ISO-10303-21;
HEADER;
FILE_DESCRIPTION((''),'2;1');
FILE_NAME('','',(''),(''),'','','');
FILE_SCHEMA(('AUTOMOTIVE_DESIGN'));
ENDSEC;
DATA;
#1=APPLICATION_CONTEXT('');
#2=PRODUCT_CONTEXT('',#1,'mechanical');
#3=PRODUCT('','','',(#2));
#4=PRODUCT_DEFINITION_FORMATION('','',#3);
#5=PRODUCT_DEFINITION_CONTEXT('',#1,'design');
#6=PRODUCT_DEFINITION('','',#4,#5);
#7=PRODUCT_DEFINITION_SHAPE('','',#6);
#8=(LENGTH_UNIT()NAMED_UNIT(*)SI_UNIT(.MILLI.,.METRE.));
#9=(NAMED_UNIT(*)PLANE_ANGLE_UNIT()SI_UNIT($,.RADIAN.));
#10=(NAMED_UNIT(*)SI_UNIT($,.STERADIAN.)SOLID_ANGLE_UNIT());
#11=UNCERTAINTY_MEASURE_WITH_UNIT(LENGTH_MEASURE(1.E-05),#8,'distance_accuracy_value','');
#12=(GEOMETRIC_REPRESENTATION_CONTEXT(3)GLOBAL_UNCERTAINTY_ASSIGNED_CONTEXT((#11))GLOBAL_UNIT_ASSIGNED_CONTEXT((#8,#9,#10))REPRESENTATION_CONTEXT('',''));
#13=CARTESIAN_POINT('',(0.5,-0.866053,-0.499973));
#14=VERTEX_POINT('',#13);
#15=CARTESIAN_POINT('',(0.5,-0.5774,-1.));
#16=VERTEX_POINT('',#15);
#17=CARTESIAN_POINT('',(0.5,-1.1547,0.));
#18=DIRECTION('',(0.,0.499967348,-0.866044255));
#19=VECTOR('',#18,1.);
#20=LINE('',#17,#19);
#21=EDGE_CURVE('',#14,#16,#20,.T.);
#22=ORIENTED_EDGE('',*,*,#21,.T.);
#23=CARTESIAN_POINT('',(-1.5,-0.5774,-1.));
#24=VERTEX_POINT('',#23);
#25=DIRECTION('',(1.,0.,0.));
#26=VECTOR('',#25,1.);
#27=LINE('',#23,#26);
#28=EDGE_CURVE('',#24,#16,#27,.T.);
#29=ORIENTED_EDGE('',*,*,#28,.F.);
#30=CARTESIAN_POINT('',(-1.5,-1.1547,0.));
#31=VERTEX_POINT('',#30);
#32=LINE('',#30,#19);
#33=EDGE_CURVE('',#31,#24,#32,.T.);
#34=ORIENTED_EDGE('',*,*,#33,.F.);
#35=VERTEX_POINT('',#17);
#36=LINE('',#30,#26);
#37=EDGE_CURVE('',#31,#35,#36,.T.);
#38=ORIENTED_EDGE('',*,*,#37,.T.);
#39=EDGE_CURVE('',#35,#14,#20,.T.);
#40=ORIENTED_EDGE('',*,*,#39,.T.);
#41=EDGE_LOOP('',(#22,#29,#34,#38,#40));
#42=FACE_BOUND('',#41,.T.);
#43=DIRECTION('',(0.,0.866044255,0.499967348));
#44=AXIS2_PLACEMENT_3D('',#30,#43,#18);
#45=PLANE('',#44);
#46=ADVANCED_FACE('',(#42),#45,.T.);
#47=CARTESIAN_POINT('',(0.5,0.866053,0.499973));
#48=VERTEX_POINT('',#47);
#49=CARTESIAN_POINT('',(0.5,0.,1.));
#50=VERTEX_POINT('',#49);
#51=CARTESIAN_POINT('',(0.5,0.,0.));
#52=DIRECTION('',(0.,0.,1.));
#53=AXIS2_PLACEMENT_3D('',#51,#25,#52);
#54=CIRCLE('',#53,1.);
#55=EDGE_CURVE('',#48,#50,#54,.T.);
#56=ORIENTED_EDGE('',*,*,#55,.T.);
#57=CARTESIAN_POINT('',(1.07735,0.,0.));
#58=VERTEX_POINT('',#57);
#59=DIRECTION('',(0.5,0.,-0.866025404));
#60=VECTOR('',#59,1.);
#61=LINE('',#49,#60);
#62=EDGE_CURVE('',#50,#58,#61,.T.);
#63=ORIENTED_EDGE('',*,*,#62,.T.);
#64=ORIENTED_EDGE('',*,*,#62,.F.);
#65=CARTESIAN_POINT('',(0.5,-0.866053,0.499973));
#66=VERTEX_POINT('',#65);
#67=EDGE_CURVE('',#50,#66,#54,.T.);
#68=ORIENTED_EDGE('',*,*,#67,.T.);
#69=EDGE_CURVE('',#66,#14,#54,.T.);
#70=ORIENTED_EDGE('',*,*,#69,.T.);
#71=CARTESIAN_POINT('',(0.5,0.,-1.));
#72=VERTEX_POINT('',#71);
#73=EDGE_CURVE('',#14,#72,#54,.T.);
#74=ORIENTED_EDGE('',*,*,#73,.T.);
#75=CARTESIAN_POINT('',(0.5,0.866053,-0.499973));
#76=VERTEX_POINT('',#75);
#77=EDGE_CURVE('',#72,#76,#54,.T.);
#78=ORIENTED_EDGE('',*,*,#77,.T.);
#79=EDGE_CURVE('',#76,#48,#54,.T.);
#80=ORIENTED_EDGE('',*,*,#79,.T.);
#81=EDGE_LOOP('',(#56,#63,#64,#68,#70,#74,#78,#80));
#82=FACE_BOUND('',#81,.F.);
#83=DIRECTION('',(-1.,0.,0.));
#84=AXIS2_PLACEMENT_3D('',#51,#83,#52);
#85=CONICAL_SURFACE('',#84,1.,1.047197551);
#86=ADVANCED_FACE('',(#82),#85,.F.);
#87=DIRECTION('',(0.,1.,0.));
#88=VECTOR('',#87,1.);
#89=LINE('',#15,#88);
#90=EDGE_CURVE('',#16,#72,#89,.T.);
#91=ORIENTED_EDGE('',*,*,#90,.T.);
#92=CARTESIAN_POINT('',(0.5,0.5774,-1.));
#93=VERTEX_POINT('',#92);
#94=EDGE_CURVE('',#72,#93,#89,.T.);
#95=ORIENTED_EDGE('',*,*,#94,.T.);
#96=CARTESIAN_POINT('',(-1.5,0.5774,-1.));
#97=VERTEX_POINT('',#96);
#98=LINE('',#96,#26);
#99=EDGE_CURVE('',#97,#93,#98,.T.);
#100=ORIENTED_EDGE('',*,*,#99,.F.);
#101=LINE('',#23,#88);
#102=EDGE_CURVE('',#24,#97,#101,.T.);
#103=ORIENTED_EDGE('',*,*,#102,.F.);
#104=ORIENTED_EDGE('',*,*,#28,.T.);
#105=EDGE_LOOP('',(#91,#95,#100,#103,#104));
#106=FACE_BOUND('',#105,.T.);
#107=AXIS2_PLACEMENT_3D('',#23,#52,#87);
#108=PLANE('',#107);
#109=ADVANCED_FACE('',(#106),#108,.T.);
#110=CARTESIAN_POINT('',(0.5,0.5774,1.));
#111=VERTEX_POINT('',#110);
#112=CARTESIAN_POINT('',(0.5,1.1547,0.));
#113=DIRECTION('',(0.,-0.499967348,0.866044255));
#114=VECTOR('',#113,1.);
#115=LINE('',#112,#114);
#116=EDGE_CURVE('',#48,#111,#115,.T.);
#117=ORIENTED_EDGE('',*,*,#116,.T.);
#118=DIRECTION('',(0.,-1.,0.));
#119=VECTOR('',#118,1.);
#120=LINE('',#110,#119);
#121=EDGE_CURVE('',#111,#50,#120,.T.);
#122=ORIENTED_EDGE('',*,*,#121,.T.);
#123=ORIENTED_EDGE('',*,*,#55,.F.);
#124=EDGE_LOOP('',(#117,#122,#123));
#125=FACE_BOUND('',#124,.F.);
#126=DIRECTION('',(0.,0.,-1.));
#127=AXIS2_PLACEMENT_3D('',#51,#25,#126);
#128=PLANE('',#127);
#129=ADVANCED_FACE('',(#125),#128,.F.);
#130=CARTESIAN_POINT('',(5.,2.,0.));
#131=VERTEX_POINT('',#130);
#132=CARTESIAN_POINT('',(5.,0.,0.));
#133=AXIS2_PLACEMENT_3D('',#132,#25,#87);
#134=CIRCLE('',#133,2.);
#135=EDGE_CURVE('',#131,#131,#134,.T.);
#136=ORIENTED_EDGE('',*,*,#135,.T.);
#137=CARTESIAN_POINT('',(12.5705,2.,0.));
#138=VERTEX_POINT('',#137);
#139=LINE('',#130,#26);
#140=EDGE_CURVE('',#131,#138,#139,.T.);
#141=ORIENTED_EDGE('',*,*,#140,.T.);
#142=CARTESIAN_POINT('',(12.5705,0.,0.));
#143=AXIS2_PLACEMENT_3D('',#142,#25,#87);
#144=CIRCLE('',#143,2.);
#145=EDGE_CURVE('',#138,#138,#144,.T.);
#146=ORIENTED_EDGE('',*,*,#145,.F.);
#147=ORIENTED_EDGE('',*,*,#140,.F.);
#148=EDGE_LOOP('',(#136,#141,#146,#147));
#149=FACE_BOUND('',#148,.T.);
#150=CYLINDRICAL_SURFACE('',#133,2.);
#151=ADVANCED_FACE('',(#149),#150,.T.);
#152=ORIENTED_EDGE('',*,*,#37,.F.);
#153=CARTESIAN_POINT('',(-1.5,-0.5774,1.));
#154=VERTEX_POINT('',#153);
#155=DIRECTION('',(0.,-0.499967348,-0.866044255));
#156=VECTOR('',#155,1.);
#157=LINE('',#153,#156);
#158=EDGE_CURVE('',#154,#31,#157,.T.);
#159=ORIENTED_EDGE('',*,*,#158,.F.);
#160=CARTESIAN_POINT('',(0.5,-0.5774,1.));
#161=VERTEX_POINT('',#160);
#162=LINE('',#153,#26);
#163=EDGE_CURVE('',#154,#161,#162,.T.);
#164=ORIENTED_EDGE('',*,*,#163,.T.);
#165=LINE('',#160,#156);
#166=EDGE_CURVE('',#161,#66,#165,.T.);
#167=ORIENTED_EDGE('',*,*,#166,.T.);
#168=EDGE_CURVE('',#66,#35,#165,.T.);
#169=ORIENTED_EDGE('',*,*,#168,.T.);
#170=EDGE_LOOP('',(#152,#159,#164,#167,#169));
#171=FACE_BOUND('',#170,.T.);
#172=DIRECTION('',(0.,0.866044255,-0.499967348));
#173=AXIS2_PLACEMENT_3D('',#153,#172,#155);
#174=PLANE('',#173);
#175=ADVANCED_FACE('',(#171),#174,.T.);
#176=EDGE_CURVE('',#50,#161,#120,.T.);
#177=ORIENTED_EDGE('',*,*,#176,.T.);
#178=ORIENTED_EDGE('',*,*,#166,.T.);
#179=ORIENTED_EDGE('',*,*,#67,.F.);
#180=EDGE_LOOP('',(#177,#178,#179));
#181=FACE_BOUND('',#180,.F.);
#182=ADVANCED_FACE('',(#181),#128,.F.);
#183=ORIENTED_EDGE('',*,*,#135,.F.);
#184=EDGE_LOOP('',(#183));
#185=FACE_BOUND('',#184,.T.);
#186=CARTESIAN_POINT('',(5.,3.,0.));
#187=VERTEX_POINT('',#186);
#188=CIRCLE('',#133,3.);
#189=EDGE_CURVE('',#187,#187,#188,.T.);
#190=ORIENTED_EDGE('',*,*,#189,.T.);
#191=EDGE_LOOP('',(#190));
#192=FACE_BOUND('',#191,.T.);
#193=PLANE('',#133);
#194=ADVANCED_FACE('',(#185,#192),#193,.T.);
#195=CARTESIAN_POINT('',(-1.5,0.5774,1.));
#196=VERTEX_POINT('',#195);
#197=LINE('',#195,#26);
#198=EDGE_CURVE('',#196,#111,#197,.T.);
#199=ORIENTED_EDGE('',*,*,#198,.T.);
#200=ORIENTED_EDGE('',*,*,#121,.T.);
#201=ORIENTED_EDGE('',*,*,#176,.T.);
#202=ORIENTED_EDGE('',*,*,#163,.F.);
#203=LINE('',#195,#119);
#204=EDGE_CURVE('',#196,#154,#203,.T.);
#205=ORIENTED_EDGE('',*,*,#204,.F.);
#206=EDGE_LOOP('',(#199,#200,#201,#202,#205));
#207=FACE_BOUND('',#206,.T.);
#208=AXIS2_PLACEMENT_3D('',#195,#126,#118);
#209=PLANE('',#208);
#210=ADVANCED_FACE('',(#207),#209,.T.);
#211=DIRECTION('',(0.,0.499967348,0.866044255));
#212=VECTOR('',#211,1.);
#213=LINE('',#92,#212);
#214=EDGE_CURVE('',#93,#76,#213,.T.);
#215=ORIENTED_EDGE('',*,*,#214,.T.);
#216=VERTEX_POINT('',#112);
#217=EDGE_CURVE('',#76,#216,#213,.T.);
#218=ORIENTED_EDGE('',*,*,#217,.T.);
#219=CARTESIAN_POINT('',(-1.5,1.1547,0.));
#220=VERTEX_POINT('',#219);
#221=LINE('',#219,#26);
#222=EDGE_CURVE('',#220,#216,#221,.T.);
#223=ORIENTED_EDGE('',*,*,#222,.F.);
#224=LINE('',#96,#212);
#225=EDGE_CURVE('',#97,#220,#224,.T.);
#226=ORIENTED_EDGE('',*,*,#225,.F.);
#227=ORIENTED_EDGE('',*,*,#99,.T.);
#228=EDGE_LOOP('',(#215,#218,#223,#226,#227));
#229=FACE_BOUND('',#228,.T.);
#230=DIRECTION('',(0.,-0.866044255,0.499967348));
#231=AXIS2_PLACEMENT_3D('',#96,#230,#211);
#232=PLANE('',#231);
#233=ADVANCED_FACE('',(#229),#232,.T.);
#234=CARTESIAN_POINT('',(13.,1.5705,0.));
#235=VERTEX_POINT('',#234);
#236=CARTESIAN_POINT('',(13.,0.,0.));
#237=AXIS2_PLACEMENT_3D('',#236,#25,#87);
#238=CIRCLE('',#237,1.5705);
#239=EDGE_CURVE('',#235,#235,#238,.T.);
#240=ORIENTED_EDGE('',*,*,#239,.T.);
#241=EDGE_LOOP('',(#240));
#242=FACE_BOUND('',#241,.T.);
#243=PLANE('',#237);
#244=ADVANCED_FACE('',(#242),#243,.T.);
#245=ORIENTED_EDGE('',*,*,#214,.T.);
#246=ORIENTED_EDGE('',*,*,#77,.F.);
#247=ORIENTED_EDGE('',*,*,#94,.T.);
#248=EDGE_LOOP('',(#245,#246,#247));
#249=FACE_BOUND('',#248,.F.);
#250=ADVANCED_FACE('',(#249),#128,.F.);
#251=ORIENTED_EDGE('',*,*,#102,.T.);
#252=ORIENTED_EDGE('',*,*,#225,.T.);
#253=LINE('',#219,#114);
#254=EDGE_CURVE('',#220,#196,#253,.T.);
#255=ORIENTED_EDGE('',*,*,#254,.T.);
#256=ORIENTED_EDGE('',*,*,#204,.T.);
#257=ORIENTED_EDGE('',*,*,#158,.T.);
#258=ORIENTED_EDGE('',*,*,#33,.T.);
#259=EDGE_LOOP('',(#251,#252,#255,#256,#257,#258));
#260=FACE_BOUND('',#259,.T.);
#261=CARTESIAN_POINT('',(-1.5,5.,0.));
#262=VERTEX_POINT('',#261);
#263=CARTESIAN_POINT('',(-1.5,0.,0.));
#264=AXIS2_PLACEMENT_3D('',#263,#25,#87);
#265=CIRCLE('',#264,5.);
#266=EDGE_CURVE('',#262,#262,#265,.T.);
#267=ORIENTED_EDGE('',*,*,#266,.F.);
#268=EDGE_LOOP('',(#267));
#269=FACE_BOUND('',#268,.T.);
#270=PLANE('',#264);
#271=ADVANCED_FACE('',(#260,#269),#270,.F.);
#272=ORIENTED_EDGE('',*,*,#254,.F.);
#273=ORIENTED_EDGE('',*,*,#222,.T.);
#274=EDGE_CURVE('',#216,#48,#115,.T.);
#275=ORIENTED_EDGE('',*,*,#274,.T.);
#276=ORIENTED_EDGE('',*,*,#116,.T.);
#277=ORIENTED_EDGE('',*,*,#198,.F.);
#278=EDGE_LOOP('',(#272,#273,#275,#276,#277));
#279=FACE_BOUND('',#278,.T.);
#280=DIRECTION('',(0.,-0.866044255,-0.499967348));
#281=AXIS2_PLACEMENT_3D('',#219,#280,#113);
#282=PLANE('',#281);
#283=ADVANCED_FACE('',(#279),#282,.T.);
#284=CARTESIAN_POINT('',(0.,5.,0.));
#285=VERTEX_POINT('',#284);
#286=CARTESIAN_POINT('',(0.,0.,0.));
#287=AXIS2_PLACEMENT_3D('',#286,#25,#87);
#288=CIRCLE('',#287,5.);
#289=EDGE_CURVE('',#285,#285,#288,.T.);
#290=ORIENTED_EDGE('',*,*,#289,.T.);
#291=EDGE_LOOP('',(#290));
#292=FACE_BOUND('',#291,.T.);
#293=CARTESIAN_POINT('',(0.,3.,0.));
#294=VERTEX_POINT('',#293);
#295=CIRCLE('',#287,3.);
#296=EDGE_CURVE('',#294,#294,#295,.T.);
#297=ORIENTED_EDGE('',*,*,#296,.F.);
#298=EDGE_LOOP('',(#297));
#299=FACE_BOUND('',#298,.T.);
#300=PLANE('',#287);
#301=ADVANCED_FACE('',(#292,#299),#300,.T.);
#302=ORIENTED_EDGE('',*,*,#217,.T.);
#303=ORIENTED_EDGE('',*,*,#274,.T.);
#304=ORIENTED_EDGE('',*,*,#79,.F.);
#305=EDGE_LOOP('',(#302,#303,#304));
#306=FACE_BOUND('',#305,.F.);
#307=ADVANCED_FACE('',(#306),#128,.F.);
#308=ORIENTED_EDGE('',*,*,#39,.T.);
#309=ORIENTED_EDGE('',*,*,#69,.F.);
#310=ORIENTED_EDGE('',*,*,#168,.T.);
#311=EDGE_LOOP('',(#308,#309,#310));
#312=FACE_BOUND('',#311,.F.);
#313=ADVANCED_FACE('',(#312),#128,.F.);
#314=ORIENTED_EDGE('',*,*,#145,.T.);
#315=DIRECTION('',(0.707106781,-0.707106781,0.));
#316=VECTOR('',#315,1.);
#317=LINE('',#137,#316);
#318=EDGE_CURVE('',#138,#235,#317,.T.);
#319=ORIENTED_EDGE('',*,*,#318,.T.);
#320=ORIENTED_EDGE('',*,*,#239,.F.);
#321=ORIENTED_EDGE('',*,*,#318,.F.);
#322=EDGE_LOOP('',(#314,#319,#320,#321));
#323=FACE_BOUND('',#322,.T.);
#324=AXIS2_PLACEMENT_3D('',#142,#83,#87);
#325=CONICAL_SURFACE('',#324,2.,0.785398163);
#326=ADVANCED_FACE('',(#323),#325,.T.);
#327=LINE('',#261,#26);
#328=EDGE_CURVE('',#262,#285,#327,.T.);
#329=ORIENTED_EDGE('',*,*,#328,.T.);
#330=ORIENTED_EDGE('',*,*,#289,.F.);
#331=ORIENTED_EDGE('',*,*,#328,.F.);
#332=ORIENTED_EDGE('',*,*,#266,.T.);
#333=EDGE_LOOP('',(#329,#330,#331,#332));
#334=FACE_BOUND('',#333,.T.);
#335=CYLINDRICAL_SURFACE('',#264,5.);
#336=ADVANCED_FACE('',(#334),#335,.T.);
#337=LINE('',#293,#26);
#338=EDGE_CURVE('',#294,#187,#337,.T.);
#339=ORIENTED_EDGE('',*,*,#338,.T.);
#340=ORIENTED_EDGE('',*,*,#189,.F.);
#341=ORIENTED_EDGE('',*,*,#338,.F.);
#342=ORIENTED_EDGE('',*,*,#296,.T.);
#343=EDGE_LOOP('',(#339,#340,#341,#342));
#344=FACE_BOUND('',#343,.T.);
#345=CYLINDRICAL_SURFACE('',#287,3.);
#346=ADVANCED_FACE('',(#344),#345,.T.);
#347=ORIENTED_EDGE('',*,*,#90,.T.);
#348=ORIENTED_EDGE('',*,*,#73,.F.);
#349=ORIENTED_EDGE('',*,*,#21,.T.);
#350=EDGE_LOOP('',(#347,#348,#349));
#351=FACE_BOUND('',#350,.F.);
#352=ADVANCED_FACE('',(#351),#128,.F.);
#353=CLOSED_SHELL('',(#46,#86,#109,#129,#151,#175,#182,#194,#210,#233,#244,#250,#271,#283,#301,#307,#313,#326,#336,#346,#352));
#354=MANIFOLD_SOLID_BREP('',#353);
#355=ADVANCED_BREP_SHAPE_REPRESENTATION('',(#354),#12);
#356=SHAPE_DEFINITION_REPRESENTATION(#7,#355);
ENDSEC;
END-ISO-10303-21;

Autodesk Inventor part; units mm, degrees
ref_plane "YZ Plane" through (0, 0, 0) normal (1, 0, 0) x (0, 1, 0)
ref_plane "XZ Plane" through (0, 0, 0) normal (0, 1, 0) x (-1, 0, 0)
ref_plane "XY Plane" through (0, 0, 0) normal (0, 0, 1) x (1, 0, 0)
sketch "Sketch_1" plane through (0, 0, 0) normal (0, 0, 1) x (1, 0, 0)
  line L0 (5, 0) -> (-1.5, 0)
  line L1 (-1.5, 0) -> (-1.5, 5)
  line L2 (-1.5, 5) -> (0, 5)
  line L3 (0, 5) -> (0, 3)
  line L4 (0, 3) -> (5, 3)
  line L5 (5, 3) -> (5, 0)
  line L6 (5, 0) -> (-1.5, 0)
revolve "Revolution1" add sketch "Sketch_1" angle 360 about axis through (5, 0, 0) along (1, 0, 0)
sketch "Sketch2" plane through (-1.5, 0, 0) normal (-1, 0, 0) x (0, 0, 1)
  point P0 (0, 0)
hole "Hole1" at (-1.5, 0, 0) direction (1, 0, 0) diameter 2 depth 2 tip angle 120
sketch "Sketch_3" plane through (-1.5, 0, 0) normal (1, 0, 0) x (0, 0, -1)
  line L0 (-1, -0.5774) -> (0, -1.1547)
  line L1 (0, -1.1547) -> (1, -0.5774)
  line L2 (1, -0.5774) -> (1, 0.5774)
  line L3 (1, 0.5774) -> (0, 1.1547)
  line L4 (0, 1.1547) -> (-1, 0.5774)
  line L5 (-1, 0.5774) -> (-1, -0.5774)
extrude "Extrusion1" cut sketch "Sketch_3" along normal blind 2
sketch "Sketch_4" plane through (0, 0, 0) normal (0, 0, 1) x (1, 0, 0)
  line L0 (13, 0) -> (5, 0)
  line L1 (5, 0) -> (5, 2)
  line L2 (5, 2) -> (12.5705, 2)
  line L3 (12.5705, 2) -> (13, 1.5705)
  line L4 (13, 1.5705) -> (13, 0)
  line L5 (13, 0) -> (5, 0)
revolve "Revolution2" add sketch "Sketch_4" angle 360 about axis through (13, 0, 0) along (1, 0, 0)
thread "Thread1" size "M4x0.7" class "6g" standard "ISO Metric profile" length 6.3705
properties part number "DBGS4-5-8" material "스테인리스스틸"
